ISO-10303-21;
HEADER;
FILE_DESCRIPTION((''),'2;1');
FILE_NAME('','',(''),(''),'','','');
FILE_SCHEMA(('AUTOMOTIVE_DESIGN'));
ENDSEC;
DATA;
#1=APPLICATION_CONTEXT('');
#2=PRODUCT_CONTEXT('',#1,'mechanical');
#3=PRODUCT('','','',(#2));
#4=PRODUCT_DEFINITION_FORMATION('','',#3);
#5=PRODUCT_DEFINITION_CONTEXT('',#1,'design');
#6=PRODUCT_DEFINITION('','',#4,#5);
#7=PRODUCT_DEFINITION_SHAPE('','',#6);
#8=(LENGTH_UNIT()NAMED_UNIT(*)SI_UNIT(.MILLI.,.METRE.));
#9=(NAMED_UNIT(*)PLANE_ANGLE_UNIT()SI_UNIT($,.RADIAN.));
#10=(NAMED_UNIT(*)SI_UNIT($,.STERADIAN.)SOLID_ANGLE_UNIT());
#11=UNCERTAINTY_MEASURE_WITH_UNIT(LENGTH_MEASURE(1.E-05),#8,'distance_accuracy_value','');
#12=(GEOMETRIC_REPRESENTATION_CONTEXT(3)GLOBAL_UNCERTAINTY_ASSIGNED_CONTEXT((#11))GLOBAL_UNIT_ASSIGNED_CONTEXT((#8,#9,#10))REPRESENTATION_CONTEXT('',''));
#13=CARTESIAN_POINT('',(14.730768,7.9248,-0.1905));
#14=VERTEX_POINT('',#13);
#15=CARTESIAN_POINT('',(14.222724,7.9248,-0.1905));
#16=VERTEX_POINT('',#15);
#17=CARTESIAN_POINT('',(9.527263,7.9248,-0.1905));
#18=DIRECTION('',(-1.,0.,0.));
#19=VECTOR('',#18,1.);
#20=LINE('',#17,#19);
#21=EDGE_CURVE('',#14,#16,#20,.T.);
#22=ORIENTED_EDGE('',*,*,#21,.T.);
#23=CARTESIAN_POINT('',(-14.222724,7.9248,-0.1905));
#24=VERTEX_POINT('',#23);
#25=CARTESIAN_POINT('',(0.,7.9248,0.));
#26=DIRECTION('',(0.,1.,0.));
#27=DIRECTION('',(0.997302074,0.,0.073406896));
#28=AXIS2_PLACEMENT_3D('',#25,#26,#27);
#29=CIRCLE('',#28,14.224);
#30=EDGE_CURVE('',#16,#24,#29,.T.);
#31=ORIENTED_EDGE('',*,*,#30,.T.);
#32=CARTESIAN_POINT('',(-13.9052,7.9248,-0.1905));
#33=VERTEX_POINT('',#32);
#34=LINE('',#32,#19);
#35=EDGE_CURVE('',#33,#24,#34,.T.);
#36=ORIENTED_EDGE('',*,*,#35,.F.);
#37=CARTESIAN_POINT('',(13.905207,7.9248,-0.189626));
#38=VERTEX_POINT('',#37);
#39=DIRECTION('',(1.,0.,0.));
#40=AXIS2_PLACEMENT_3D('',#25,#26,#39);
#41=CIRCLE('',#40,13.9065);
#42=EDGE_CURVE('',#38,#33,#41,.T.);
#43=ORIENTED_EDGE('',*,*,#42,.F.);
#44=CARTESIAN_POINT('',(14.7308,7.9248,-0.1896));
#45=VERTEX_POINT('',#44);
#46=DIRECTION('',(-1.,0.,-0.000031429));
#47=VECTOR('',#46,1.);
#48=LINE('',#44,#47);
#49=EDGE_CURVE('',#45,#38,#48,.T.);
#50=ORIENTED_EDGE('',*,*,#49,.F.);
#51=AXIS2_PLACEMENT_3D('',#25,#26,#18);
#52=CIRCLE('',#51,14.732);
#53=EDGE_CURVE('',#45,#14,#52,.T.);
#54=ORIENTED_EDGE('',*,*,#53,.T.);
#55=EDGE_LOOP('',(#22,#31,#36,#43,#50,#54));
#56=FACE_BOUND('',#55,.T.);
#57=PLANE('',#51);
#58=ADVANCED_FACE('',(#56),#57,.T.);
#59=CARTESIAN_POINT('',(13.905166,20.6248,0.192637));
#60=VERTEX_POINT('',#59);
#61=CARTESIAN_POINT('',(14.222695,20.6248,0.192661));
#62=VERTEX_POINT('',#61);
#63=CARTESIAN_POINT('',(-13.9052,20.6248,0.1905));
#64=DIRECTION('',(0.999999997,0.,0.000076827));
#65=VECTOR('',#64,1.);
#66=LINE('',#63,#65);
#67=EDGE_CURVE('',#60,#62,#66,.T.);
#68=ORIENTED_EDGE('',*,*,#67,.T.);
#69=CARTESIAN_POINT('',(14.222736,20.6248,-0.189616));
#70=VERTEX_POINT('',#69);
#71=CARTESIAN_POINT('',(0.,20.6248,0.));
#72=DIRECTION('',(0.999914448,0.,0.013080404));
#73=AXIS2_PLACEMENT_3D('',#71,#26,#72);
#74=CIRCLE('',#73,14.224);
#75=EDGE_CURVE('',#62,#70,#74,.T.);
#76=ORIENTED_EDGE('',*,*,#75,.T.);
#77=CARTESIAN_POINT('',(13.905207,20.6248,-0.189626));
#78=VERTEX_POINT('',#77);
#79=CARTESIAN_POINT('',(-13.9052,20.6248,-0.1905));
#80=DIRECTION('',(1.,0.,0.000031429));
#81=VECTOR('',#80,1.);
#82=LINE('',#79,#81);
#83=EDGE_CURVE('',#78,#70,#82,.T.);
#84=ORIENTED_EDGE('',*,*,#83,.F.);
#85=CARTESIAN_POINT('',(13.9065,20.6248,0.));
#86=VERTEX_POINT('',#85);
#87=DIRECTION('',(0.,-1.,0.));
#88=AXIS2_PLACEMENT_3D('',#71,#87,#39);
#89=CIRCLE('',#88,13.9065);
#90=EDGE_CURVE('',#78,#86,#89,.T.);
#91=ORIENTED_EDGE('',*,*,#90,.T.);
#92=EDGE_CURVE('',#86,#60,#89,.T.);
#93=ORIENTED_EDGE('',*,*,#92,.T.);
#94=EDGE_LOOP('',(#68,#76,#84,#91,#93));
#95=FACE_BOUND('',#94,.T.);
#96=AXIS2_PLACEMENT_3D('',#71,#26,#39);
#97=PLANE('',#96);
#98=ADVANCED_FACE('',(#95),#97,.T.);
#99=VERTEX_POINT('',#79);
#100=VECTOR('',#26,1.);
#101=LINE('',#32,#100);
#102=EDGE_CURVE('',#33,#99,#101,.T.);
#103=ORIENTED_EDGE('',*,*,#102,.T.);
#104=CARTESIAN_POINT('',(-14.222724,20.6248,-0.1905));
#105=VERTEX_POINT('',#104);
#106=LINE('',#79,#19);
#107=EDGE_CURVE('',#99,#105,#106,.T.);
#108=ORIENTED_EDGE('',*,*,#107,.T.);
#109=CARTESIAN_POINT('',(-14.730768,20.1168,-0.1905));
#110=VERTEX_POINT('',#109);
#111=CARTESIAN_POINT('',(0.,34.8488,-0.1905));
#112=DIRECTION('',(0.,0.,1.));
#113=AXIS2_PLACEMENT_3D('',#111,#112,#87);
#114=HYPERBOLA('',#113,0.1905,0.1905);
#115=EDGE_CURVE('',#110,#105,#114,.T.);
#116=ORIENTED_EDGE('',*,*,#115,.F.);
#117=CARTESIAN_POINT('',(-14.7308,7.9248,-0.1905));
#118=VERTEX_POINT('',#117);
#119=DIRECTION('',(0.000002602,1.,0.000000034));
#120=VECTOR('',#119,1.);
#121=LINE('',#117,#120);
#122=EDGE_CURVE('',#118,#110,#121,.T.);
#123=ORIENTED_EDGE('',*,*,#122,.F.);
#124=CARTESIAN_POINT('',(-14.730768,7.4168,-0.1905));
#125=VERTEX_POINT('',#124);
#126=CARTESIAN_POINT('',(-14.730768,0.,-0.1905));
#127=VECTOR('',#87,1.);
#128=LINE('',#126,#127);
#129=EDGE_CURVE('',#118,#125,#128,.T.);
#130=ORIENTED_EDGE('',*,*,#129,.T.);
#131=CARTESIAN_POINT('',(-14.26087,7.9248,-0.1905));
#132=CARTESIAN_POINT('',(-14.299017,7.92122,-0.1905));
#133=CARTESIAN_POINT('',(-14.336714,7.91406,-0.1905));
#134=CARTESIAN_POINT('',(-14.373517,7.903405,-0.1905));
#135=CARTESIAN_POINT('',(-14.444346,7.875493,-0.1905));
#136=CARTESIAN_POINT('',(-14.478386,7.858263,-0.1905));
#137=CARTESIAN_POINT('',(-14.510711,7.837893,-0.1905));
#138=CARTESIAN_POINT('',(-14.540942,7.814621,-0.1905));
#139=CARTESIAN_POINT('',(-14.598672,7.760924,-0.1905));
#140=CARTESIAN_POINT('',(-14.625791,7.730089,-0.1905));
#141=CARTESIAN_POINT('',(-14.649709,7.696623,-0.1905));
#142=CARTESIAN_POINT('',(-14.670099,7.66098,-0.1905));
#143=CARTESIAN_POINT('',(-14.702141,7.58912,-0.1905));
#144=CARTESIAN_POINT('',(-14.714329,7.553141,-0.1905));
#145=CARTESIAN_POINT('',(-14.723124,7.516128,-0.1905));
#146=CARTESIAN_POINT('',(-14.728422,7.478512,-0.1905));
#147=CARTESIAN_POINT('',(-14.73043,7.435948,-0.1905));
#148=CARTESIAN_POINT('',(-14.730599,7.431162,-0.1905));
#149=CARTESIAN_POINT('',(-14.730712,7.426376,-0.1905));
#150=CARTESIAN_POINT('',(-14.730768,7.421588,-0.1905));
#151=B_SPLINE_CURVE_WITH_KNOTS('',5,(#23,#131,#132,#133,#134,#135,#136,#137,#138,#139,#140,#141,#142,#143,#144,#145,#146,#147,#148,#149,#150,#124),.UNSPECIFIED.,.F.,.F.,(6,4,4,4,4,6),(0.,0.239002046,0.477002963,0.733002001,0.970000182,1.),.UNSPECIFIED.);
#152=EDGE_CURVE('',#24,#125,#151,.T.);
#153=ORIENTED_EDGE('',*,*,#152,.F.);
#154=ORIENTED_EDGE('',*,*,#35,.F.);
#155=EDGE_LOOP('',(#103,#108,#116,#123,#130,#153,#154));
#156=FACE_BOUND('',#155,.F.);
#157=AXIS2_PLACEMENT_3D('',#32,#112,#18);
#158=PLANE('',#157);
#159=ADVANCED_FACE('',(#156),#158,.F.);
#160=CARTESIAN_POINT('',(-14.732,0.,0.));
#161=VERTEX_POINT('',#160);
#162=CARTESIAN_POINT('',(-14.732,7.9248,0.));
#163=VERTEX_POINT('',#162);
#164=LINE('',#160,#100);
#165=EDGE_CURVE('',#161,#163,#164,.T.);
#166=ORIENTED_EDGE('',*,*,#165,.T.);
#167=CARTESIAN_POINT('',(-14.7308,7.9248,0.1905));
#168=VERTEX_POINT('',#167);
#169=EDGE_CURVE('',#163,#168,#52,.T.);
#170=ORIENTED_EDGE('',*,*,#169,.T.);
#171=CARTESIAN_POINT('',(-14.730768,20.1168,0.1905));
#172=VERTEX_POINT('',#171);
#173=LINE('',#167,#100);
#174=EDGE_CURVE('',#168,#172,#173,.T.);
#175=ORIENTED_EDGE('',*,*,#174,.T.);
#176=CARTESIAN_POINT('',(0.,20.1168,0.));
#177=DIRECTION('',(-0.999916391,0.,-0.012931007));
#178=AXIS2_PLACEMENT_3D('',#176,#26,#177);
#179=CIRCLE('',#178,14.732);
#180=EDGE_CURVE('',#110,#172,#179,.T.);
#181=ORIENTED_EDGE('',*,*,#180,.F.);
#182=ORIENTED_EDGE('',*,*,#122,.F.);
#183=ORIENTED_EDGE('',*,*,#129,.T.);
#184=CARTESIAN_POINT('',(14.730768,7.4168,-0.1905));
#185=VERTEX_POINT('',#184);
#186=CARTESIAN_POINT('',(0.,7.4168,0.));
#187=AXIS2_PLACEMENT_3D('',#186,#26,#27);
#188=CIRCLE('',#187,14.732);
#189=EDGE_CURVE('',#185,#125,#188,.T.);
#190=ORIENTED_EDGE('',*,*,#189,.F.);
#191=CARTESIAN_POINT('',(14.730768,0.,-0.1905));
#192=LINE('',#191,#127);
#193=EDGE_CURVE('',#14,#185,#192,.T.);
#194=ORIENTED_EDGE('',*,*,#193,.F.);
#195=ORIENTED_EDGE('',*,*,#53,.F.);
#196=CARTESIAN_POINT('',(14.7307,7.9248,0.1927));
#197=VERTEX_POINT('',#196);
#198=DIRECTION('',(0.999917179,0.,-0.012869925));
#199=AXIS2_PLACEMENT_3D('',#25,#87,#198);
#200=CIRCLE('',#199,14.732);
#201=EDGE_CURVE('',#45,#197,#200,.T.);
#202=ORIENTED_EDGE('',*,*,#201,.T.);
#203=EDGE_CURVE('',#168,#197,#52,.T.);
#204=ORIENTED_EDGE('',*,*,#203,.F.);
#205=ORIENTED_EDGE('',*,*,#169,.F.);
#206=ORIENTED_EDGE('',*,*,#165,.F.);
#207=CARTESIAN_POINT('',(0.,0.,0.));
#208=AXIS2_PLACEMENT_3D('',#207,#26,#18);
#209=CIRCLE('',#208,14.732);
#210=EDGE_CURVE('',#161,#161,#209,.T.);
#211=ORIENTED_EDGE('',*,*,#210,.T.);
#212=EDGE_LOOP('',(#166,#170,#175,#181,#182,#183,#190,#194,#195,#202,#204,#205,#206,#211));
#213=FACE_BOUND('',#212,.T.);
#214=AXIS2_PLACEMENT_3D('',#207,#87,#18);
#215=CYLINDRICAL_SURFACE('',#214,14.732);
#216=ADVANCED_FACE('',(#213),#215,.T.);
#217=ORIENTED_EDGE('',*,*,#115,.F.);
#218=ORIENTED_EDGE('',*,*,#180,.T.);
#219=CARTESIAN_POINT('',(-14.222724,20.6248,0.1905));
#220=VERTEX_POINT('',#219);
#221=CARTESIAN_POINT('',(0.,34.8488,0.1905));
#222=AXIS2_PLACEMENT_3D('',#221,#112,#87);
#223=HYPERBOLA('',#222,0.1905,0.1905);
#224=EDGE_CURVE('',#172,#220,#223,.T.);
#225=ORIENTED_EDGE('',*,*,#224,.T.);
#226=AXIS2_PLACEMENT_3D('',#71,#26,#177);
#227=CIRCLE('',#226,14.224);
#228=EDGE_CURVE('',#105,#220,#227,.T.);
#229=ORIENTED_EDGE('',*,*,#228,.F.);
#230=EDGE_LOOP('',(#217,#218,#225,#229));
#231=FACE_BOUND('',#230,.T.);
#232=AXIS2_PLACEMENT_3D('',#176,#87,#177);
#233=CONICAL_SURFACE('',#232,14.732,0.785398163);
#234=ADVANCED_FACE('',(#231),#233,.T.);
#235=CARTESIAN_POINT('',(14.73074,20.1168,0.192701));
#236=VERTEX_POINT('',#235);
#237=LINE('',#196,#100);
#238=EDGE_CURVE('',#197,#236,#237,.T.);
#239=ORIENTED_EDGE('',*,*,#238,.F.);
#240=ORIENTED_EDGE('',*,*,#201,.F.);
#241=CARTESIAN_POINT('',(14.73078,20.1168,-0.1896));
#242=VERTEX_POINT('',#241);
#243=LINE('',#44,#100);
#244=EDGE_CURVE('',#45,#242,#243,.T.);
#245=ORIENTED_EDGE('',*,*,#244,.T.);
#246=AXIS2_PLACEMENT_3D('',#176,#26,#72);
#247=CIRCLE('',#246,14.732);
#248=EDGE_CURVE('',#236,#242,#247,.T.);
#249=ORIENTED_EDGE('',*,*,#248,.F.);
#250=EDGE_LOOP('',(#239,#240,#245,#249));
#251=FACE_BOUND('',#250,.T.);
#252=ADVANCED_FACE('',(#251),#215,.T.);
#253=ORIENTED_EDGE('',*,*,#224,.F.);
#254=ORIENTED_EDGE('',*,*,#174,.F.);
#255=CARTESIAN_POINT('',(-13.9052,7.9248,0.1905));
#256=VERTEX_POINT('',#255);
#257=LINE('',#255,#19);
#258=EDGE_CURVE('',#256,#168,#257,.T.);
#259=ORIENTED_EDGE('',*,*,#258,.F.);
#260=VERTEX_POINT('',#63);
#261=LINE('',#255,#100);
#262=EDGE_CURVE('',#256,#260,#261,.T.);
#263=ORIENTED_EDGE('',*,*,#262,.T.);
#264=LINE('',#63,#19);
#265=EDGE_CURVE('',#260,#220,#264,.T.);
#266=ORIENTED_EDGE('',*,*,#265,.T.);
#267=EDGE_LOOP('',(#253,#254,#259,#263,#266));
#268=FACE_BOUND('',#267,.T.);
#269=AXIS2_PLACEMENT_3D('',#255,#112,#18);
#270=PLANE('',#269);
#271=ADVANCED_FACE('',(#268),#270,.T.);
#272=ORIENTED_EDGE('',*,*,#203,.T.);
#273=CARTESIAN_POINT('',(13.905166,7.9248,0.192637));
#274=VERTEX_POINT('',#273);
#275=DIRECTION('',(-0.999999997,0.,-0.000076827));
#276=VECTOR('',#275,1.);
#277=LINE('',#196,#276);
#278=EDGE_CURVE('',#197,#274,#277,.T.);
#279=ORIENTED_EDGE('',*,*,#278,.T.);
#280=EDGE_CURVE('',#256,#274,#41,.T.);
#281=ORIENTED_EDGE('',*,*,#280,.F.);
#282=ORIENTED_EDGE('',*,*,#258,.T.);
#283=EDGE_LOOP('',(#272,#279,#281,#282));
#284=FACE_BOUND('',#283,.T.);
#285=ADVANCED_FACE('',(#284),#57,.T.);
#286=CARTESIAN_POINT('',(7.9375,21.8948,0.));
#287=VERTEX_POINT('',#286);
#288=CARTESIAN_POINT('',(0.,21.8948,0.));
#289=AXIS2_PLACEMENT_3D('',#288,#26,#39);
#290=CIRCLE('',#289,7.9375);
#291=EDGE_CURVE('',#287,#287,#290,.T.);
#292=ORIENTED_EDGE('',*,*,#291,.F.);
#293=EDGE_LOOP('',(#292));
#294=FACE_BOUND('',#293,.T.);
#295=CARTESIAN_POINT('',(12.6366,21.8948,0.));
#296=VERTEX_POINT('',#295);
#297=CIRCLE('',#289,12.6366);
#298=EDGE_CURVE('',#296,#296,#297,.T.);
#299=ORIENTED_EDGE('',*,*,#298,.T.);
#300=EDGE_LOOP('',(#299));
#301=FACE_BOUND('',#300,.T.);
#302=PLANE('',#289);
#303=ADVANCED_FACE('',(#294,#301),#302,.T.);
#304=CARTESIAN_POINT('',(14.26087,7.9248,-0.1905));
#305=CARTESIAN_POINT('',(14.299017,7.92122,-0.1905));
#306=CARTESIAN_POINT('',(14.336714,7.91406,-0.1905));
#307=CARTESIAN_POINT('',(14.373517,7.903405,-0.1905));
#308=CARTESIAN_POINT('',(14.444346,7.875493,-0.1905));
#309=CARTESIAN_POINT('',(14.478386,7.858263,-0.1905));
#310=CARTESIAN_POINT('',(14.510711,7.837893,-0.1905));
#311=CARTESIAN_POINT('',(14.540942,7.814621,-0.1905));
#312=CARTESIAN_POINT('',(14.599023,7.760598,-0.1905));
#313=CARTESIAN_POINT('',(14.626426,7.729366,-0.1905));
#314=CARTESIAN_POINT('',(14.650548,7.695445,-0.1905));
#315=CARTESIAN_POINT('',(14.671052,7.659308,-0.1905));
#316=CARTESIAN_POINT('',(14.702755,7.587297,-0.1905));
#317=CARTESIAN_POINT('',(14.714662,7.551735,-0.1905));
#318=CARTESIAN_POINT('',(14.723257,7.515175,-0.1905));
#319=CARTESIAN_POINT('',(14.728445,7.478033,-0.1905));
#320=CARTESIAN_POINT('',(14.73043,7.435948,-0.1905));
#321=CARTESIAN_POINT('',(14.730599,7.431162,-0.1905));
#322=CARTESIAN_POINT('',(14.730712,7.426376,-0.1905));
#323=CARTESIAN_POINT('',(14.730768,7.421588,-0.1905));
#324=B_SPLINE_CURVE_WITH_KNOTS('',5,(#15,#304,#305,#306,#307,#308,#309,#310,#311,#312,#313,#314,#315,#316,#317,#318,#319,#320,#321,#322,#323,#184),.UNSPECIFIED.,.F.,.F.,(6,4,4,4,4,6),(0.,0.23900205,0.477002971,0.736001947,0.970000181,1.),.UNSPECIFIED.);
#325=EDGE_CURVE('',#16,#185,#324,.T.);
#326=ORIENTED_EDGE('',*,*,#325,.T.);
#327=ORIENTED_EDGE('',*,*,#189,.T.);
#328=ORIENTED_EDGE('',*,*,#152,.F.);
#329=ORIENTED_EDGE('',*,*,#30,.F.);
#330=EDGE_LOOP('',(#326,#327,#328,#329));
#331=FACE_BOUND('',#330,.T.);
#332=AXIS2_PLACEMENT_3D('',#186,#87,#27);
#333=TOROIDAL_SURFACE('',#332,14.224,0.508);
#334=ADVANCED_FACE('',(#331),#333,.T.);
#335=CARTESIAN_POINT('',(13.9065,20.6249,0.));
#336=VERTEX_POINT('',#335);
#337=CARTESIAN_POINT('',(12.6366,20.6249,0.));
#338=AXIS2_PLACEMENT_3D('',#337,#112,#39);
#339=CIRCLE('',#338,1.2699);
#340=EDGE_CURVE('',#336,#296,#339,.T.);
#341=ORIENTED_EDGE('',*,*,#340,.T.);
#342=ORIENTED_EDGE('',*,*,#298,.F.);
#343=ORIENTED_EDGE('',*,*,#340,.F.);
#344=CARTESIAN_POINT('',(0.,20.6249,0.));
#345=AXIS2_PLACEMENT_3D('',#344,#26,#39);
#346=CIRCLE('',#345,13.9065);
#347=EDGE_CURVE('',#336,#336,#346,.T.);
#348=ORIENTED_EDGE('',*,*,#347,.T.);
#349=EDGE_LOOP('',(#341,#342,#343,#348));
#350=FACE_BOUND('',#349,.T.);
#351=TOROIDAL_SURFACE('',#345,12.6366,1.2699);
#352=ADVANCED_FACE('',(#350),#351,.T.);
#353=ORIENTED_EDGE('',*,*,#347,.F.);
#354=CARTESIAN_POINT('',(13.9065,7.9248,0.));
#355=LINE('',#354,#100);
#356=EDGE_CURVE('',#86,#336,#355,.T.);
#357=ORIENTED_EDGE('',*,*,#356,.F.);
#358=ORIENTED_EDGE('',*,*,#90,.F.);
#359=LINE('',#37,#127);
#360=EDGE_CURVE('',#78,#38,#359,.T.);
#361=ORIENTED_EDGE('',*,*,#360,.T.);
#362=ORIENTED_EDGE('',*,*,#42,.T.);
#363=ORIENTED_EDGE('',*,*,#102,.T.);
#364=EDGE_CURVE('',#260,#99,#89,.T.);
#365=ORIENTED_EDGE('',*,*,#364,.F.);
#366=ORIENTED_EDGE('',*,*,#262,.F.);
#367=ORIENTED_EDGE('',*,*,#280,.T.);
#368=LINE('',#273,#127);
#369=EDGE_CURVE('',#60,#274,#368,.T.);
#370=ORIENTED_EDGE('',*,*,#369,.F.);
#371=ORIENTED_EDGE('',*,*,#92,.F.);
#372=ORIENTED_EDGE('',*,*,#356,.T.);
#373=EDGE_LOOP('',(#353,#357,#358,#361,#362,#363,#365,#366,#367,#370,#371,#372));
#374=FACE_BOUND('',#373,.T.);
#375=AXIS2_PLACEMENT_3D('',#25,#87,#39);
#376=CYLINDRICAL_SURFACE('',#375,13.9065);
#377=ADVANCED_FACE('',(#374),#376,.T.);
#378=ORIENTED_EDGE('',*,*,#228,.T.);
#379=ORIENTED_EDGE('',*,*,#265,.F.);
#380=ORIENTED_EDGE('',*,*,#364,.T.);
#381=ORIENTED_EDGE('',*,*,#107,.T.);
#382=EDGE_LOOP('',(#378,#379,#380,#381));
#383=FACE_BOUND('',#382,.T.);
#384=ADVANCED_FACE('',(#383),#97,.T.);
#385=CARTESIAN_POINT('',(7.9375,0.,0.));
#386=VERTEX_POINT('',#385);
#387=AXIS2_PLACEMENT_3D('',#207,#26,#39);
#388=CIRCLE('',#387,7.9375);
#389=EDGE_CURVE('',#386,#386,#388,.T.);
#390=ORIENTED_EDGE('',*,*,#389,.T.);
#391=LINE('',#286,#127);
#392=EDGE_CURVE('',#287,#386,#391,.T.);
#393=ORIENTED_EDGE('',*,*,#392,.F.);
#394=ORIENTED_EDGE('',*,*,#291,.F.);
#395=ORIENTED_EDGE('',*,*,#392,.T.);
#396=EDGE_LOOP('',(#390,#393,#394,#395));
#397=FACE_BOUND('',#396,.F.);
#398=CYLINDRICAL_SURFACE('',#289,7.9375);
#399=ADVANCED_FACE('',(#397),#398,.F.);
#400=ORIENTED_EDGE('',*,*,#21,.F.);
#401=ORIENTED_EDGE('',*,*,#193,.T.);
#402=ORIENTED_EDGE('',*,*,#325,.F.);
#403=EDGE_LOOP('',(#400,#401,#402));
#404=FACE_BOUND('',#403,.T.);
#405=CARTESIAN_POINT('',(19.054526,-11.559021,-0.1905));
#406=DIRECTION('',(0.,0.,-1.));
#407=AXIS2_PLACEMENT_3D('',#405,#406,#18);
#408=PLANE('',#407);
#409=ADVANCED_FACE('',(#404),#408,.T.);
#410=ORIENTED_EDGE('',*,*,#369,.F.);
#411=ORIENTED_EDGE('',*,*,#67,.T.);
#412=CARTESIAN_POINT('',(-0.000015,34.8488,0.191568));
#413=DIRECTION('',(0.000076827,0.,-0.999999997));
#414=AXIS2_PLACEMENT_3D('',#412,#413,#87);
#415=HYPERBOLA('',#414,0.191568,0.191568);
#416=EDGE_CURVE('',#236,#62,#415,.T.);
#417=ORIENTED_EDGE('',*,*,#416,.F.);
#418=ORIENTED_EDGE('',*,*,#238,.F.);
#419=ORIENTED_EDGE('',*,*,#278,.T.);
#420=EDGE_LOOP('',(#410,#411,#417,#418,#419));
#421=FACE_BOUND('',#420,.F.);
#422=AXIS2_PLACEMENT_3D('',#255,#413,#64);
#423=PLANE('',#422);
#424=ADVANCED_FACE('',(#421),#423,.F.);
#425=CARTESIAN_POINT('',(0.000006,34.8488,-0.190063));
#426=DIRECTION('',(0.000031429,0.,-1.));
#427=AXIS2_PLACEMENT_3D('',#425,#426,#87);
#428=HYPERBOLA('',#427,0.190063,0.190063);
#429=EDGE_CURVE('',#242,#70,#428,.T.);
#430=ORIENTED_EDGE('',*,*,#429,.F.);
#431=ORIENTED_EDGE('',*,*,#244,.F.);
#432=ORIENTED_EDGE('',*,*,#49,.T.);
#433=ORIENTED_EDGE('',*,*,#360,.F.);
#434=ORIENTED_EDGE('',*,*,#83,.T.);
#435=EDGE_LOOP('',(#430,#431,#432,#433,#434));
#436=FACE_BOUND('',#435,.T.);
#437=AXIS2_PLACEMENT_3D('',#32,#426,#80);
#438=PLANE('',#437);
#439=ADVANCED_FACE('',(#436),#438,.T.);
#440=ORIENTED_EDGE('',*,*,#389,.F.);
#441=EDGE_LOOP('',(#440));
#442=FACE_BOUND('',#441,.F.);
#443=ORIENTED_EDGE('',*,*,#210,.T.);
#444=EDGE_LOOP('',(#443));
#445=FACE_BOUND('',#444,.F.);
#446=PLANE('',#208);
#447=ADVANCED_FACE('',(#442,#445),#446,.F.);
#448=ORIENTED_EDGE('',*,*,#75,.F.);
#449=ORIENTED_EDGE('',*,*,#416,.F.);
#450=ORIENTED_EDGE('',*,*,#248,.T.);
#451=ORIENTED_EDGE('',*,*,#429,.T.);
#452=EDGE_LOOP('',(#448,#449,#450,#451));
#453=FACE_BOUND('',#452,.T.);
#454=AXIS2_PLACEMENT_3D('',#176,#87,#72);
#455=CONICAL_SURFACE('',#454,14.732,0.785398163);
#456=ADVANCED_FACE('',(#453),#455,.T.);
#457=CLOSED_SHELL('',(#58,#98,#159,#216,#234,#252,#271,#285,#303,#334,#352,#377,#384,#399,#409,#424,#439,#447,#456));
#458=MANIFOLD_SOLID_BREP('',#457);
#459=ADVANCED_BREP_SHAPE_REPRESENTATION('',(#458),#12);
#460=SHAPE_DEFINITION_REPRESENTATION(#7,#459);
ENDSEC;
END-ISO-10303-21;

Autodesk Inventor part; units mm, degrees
ref_plane "YZ Plane" through (0, 0, 0) normal (1, 0, 0) x (0, 1, 0)
ref_plane "XZ Plane" through (0, 0, 0) normal (0, 1, 0) x (-1, 0, 0)
ref_plane "XY Plane" through (0, 0, 0) normal (0, 0, 1) x (1, 0, 0)
sketch "Sketch1" plane through (0, 0, 0) normal (0, 1, 0) x (-1, 0, 0)
  circle A0 centre (0, 0) radius 14.732
  dimension "d0" = 29.464
extrude "Extrusion1" add sketch "Sketch1" along normal blind 7.9248
sketch "Sketch2" plane through (0, 7.9248, 0) normal (0, 1, 0) x (1, 0, 0)
  circle A0 centre (0, 0) radius 14.732 projected
  circle A1 centre (0, 0) radius 13.9065
  dimension "d3" = 27.813
extrude "Extrusion2" add sketch "Sketch2" along normal blind 13.97 contours A1
sketch "Sketch4" plane through (0, 7.9248, 0) normal (0, 1, 0) x (1, 0, 0)
  circle A0 centre (0, 0) radius 13.9065 projected
  circle A1 centre (0, 0) radius 14.732 projected
  circle A2 centre (0, 0) radius 13.9065
  circle A3 centre (0, 0) radius 14.732
  line L0 (-13.905, 0.2046) -> (-13.0794, 0.2046) construction
  line L1 (-13.9052, 0.1905) -> (-14.7308, 0.1905)
  line L2 (-13.9052, 0.1905) -> (-13.0796, 0.1905) construction
  line L3 (-13.9052, -0.1905) -> (-14.7308, -0.1905)
  line L4 (-13.9052, -0.1905) -> (-13.0796, -0.1905) construction
  line L5 (-13.9052, 0.1905) -> (14.7308, 0.1896)
  line L6 (-13.9052, -0.1905) -> (14.7307, -0.1927)
  dimension "d7" = 180
  dimension "d8" = 180
extrude "Extrusion3" add sketch "Sketch4" along normal blind 12.7 contours L5 A0 L6 | A0 L3 A1 L1 | L5 A1 L6 A0
chamfer "Chamfer1" distance 0.508 angle 45 1 edges at (14.732, 20.6248, 0.0015)
chamfer "Chamfer2" distance 0.508 angle 45 1 edges at (-14.732, 20.6248, 0)
fillet "Fillet1" radius 1.27 1 edges at (-13.9065, 21.8948, 0)
fillet "Fillet2" radius 0.508 1 edges at (0.0004, 7.9248, -14.732)
sketch "Sketch5" plane through (0, 21.8948, 0) normal (0, 1, 0) x (1, 0, 0)
  circle A0 centre (0, 0) radius 12.6365 projected
  circle A1 centre (0, 0) radius 7.9375
  dimension "d19" = 15.875
extrude "Extrusion4" cut sketch "Sketch5" against normal blind 25.4 contours A1
properties part number "Pipe Cap"
